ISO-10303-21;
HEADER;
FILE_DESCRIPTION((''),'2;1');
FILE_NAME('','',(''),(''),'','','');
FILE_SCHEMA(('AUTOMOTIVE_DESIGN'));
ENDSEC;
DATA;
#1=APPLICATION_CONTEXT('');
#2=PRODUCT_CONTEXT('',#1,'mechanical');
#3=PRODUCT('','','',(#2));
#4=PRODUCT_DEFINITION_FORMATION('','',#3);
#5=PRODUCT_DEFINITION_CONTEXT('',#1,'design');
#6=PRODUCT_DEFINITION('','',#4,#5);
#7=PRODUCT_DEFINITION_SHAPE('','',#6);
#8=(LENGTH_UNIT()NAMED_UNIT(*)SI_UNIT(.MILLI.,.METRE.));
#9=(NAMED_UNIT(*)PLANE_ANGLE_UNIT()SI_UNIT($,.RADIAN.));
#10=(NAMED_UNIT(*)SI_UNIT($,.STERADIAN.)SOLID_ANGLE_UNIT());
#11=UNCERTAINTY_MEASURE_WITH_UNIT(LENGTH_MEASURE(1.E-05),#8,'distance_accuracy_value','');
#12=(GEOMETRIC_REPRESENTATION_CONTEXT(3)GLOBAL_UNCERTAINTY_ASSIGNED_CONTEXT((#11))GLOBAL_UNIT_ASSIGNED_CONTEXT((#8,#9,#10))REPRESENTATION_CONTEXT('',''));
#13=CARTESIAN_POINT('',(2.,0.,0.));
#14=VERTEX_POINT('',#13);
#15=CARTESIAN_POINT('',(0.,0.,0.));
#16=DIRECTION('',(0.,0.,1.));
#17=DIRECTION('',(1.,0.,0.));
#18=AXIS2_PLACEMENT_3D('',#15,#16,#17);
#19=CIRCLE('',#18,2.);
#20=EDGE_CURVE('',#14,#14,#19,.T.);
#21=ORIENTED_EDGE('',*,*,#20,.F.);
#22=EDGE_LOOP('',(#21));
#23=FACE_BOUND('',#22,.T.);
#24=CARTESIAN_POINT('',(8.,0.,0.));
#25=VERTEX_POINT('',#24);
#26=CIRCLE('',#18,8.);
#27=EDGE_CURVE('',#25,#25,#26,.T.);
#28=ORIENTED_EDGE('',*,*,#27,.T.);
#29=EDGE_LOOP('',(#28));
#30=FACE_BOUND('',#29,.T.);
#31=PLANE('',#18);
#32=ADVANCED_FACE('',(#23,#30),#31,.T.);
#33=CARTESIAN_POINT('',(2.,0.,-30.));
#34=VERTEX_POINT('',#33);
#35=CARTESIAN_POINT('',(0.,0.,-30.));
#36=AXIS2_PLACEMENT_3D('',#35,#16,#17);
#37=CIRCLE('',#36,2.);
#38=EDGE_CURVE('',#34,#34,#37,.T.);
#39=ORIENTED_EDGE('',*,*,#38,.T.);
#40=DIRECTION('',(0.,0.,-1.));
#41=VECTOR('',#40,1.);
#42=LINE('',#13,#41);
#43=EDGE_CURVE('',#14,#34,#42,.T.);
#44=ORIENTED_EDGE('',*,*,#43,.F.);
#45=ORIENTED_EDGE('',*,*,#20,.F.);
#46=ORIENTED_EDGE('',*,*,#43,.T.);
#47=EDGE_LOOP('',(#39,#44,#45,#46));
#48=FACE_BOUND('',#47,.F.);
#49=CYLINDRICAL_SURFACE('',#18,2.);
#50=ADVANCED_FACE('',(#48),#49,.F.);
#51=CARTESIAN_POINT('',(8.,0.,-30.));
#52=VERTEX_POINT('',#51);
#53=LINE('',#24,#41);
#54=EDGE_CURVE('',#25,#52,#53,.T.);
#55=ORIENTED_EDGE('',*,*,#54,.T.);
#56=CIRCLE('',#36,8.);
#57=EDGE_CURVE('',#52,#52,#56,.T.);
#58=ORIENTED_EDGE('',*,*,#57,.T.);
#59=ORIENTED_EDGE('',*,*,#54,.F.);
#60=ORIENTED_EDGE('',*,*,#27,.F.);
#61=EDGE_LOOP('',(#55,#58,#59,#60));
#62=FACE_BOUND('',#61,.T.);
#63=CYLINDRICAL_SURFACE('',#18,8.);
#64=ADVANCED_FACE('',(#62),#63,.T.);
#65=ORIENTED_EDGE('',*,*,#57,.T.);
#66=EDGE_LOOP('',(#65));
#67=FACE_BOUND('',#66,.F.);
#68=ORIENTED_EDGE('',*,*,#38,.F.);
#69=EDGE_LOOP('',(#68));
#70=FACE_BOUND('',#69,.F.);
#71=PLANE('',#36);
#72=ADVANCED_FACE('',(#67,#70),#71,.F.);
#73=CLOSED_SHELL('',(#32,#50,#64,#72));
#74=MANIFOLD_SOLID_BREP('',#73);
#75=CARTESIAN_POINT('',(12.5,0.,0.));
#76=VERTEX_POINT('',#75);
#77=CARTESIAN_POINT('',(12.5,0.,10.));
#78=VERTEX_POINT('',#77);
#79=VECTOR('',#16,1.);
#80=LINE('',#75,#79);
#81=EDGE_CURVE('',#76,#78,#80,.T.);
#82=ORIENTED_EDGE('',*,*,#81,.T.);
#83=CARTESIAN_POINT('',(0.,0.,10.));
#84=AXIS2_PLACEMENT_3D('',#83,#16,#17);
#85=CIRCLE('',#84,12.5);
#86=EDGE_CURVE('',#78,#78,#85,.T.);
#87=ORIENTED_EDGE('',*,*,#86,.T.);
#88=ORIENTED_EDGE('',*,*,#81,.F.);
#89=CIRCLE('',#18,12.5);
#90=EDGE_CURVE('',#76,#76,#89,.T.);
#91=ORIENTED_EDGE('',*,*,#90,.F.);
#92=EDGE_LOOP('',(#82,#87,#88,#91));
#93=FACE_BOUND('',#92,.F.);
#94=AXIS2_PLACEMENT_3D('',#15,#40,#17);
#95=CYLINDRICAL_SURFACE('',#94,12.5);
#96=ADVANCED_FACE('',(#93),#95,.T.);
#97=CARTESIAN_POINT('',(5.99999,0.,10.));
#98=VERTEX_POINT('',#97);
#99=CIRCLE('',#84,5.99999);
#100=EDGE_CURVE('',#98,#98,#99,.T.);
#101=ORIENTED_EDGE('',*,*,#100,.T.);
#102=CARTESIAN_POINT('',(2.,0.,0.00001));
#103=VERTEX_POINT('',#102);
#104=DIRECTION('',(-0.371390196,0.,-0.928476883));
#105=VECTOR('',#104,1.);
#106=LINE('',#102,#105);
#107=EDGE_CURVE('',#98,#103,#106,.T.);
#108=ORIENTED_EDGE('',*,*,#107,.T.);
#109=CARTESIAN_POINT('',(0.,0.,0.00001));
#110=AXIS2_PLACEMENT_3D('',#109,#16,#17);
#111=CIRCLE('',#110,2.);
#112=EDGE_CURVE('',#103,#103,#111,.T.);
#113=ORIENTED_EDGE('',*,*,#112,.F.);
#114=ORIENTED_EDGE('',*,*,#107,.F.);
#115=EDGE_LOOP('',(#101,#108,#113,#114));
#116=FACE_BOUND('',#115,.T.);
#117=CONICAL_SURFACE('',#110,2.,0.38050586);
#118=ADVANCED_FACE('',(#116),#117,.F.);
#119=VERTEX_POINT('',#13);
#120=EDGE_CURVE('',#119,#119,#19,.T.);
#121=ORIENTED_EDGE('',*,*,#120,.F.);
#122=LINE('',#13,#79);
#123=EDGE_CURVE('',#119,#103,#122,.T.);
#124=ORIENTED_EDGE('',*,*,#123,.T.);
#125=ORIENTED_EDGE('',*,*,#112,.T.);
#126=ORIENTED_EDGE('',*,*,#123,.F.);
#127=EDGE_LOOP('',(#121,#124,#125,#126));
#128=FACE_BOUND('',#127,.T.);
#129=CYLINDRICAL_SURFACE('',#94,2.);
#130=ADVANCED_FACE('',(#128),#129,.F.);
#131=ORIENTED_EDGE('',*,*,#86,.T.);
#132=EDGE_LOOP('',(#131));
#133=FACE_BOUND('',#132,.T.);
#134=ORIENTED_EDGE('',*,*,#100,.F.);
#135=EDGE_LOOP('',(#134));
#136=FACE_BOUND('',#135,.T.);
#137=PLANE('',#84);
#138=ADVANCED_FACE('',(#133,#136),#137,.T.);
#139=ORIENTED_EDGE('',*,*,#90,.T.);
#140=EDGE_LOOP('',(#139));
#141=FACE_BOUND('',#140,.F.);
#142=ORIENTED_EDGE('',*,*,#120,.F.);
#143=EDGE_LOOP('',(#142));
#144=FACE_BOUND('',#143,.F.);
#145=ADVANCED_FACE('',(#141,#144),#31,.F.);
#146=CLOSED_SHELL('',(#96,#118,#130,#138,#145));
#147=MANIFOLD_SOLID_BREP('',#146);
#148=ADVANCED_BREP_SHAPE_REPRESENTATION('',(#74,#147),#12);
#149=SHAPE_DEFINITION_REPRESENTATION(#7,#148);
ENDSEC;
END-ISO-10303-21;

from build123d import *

# Parameters (mm, degrees)
F0_R     = 8
F1_DEPTH = 30
F2_R     = 2
F3_DEPTH = 30
F4_R     = 12.5
F4_R_2   = 8
F4_R_3   = 2
F5_DEPTH = 10
F6_SIZE2 = 9.99999
F6_SIZE  = 3.99999


# Not quite as in the source:
# - a fillet or chamfer is up to 0.001 mm smaller than in the source, because OpenCascade refuses the exact size


with BuildPart() as f1:
    # F0 (on Top) → F1 (new body)
    with BuildSketch(Plane.XY):
        Circle(F0_R)
    extrude(amount=-F1_DEPTH)

    # F2 (on face) → F3 (cut)
    with BuildSketch(Plane.XY):
        Circle(F2_R)
    extrude(amount=-F3_DEPTH, mode=Mode.SUBTRACT)


with BuildPart() as f5:
    # F4 (on face) → F5 (new body)
    with BuildSketch(Plane.XY):
        Circle(F4_R)
        Circle(F4_R_2, mode=Mode.SUBTRACT)
        Circle(F4_R_2)
        Circle(F4_R_3, mode=Mode.SUBTRACT)
    extrude(amount=F5_DEPTH)

    # F6 (size 4 and 10 in the source; OpenCascade refuses exactly that, so slightly less here)
    f6_edges = [f5.edges().sort_by_distance(p)[0] for p in [
        (-2, 0, 10),
    ]]
    f6_side = f5.faces().sort_by_distance((-12.146447, 0, 10))[0]
    chamfer(f6_edges, length=F6_SIZE, length2=F6_SIZE2, reference=f6_side)


solid = Compound([f1.part, f5.part])
